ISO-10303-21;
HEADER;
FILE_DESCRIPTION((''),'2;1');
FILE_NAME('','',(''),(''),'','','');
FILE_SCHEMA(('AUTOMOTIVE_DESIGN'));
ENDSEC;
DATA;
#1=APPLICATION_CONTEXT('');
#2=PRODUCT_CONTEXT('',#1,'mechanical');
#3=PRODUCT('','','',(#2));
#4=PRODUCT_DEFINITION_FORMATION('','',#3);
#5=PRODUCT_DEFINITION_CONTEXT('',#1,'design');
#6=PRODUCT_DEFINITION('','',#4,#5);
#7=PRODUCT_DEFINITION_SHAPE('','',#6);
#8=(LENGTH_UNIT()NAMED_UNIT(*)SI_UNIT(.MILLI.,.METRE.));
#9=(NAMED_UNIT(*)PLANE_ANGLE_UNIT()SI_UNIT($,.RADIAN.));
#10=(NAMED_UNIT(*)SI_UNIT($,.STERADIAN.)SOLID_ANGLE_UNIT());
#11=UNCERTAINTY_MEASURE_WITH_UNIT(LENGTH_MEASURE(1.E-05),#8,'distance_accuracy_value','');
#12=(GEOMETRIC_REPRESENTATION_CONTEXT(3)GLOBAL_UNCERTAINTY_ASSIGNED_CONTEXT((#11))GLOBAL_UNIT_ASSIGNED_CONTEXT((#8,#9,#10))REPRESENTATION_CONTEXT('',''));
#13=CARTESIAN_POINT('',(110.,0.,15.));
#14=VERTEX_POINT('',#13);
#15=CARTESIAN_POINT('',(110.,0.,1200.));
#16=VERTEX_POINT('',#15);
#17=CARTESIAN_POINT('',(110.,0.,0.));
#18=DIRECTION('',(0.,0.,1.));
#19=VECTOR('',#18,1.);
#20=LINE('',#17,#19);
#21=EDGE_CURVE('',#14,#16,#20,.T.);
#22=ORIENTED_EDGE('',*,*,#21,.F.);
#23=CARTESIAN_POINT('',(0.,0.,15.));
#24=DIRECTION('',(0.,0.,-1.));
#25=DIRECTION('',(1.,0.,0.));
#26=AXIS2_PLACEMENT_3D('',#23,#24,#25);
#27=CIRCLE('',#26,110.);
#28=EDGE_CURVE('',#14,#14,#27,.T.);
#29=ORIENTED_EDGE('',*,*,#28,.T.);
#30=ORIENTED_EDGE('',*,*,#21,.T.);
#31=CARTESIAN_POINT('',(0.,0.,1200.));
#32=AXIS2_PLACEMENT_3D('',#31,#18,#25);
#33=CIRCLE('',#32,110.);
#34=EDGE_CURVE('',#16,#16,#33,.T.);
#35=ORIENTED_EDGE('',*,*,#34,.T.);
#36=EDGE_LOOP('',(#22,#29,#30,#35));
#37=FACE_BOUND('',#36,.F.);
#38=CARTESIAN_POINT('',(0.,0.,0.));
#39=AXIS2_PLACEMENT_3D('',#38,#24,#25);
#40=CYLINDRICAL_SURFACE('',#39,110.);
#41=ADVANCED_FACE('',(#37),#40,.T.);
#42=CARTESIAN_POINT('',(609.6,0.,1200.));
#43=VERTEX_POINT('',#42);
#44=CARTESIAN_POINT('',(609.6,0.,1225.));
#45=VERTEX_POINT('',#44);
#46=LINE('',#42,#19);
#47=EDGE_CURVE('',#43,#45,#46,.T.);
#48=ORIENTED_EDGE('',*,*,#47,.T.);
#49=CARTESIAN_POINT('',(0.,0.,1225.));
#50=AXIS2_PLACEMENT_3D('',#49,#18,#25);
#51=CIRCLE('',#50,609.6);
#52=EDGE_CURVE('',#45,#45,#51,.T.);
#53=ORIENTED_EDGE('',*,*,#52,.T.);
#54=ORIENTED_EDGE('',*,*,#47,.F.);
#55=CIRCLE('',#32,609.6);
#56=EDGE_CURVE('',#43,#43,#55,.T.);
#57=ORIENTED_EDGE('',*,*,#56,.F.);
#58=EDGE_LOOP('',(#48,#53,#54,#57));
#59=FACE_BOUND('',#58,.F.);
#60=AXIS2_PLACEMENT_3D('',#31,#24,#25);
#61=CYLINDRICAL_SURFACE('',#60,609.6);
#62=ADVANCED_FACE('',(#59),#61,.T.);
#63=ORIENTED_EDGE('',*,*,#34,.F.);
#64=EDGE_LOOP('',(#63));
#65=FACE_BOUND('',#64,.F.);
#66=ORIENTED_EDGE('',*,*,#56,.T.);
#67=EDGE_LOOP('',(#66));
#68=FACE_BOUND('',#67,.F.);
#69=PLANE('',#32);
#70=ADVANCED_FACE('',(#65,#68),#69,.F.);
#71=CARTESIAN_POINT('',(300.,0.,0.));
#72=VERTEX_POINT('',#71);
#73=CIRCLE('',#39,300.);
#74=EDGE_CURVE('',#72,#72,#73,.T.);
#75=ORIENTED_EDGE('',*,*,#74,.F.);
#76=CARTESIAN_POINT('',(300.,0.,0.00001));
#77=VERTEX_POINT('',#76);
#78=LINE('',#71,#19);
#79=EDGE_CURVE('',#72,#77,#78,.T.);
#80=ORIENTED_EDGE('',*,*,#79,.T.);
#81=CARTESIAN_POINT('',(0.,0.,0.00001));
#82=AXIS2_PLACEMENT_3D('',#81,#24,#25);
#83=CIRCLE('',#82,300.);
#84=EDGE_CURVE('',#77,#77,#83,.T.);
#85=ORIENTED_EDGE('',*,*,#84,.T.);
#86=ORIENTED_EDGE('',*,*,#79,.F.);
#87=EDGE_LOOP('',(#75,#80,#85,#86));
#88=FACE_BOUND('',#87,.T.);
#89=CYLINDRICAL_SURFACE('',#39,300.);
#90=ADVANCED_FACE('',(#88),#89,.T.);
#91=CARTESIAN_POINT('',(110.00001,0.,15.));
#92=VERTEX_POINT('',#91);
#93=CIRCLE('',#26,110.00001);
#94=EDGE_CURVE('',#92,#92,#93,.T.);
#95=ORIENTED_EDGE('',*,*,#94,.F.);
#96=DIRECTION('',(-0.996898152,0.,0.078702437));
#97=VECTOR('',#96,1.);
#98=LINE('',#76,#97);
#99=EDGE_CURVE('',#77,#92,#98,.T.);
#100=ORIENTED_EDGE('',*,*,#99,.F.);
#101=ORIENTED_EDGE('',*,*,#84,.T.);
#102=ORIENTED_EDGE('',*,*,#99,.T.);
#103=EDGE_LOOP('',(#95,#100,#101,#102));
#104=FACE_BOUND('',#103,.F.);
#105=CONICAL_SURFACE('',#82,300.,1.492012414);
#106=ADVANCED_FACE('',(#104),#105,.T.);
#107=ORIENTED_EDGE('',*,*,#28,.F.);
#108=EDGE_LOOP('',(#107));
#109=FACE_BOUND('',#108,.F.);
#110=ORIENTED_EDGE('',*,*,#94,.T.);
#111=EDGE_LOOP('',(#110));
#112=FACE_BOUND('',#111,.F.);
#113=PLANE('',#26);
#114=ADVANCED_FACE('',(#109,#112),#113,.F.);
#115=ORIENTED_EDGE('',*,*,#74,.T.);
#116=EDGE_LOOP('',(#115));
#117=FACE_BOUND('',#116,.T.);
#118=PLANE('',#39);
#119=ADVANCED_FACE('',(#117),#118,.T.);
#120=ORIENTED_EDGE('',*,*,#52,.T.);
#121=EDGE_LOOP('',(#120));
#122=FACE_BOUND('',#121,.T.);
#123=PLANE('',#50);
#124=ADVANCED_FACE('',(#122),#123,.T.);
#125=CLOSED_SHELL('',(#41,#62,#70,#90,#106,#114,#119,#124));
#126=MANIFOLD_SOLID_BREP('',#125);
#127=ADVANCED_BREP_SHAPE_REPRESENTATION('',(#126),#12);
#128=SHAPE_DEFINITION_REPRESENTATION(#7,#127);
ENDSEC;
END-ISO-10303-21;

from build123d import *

# Parameters (mm, degrees)
F0_R     = 110
F1_DEPTH = 1200
F2_R     = 609.6
F2_R_2   = 110
F3_DEPTH = 25
F4_R     = 300
F4_R_2   = 110
F5_DEPTH = 15
F6_SIZE2 = 189.99999
F6_SIZE  = 14.99999


# Not quite as in the source:
# - a fillet or chamfer is up to 0.001 mm smaller than in the source, because OpenCascade refuses the exact size


with BuildPart() as f1:
    # F0 (on Top) → F1 (new body)
    with BuildSketch(Plane.XY):
        Circle(F0_R)
    extrude(amount=F1_DEPTH)

    # F2 (on face) → F3 (join)
    with BuildSketch(Plane.XY.offset(1200)):
        Circle(F2_R)
        Circle(F2_R_2, mode=Mode.SUBTRACT)
        Circle(F2_R_2)
    extrude(amount=F3_DEPTH)

    # F4 (on face) → F5 (join)
    with BuildSketch(Plane(origin=(0, 0, 0), x_dir=(1, 0, 0), z_dir=(0, 0, -1))):
        Circle(F4_R)
        Circle(F4_R_2, mode=Mode.SUBTRACT)
    extrude(amount=-F5_DEPTH)

    # F6 (size 15 and 190 in the source; OpenCascade refuses exactly that, so slightly less here)
    f6_edges = [f1.edges().sort_by_distance(p)[0] for p in [
        (-300, 0, 15),
    ]]
    f6_side = f1.faces().sort_by_distance((-300, 0, 7.5))[0]
    chamfer(f6_edges, length=F6_SIZE, length2=F6_SIZE2, reference=f6_side)


solid = f1.part
